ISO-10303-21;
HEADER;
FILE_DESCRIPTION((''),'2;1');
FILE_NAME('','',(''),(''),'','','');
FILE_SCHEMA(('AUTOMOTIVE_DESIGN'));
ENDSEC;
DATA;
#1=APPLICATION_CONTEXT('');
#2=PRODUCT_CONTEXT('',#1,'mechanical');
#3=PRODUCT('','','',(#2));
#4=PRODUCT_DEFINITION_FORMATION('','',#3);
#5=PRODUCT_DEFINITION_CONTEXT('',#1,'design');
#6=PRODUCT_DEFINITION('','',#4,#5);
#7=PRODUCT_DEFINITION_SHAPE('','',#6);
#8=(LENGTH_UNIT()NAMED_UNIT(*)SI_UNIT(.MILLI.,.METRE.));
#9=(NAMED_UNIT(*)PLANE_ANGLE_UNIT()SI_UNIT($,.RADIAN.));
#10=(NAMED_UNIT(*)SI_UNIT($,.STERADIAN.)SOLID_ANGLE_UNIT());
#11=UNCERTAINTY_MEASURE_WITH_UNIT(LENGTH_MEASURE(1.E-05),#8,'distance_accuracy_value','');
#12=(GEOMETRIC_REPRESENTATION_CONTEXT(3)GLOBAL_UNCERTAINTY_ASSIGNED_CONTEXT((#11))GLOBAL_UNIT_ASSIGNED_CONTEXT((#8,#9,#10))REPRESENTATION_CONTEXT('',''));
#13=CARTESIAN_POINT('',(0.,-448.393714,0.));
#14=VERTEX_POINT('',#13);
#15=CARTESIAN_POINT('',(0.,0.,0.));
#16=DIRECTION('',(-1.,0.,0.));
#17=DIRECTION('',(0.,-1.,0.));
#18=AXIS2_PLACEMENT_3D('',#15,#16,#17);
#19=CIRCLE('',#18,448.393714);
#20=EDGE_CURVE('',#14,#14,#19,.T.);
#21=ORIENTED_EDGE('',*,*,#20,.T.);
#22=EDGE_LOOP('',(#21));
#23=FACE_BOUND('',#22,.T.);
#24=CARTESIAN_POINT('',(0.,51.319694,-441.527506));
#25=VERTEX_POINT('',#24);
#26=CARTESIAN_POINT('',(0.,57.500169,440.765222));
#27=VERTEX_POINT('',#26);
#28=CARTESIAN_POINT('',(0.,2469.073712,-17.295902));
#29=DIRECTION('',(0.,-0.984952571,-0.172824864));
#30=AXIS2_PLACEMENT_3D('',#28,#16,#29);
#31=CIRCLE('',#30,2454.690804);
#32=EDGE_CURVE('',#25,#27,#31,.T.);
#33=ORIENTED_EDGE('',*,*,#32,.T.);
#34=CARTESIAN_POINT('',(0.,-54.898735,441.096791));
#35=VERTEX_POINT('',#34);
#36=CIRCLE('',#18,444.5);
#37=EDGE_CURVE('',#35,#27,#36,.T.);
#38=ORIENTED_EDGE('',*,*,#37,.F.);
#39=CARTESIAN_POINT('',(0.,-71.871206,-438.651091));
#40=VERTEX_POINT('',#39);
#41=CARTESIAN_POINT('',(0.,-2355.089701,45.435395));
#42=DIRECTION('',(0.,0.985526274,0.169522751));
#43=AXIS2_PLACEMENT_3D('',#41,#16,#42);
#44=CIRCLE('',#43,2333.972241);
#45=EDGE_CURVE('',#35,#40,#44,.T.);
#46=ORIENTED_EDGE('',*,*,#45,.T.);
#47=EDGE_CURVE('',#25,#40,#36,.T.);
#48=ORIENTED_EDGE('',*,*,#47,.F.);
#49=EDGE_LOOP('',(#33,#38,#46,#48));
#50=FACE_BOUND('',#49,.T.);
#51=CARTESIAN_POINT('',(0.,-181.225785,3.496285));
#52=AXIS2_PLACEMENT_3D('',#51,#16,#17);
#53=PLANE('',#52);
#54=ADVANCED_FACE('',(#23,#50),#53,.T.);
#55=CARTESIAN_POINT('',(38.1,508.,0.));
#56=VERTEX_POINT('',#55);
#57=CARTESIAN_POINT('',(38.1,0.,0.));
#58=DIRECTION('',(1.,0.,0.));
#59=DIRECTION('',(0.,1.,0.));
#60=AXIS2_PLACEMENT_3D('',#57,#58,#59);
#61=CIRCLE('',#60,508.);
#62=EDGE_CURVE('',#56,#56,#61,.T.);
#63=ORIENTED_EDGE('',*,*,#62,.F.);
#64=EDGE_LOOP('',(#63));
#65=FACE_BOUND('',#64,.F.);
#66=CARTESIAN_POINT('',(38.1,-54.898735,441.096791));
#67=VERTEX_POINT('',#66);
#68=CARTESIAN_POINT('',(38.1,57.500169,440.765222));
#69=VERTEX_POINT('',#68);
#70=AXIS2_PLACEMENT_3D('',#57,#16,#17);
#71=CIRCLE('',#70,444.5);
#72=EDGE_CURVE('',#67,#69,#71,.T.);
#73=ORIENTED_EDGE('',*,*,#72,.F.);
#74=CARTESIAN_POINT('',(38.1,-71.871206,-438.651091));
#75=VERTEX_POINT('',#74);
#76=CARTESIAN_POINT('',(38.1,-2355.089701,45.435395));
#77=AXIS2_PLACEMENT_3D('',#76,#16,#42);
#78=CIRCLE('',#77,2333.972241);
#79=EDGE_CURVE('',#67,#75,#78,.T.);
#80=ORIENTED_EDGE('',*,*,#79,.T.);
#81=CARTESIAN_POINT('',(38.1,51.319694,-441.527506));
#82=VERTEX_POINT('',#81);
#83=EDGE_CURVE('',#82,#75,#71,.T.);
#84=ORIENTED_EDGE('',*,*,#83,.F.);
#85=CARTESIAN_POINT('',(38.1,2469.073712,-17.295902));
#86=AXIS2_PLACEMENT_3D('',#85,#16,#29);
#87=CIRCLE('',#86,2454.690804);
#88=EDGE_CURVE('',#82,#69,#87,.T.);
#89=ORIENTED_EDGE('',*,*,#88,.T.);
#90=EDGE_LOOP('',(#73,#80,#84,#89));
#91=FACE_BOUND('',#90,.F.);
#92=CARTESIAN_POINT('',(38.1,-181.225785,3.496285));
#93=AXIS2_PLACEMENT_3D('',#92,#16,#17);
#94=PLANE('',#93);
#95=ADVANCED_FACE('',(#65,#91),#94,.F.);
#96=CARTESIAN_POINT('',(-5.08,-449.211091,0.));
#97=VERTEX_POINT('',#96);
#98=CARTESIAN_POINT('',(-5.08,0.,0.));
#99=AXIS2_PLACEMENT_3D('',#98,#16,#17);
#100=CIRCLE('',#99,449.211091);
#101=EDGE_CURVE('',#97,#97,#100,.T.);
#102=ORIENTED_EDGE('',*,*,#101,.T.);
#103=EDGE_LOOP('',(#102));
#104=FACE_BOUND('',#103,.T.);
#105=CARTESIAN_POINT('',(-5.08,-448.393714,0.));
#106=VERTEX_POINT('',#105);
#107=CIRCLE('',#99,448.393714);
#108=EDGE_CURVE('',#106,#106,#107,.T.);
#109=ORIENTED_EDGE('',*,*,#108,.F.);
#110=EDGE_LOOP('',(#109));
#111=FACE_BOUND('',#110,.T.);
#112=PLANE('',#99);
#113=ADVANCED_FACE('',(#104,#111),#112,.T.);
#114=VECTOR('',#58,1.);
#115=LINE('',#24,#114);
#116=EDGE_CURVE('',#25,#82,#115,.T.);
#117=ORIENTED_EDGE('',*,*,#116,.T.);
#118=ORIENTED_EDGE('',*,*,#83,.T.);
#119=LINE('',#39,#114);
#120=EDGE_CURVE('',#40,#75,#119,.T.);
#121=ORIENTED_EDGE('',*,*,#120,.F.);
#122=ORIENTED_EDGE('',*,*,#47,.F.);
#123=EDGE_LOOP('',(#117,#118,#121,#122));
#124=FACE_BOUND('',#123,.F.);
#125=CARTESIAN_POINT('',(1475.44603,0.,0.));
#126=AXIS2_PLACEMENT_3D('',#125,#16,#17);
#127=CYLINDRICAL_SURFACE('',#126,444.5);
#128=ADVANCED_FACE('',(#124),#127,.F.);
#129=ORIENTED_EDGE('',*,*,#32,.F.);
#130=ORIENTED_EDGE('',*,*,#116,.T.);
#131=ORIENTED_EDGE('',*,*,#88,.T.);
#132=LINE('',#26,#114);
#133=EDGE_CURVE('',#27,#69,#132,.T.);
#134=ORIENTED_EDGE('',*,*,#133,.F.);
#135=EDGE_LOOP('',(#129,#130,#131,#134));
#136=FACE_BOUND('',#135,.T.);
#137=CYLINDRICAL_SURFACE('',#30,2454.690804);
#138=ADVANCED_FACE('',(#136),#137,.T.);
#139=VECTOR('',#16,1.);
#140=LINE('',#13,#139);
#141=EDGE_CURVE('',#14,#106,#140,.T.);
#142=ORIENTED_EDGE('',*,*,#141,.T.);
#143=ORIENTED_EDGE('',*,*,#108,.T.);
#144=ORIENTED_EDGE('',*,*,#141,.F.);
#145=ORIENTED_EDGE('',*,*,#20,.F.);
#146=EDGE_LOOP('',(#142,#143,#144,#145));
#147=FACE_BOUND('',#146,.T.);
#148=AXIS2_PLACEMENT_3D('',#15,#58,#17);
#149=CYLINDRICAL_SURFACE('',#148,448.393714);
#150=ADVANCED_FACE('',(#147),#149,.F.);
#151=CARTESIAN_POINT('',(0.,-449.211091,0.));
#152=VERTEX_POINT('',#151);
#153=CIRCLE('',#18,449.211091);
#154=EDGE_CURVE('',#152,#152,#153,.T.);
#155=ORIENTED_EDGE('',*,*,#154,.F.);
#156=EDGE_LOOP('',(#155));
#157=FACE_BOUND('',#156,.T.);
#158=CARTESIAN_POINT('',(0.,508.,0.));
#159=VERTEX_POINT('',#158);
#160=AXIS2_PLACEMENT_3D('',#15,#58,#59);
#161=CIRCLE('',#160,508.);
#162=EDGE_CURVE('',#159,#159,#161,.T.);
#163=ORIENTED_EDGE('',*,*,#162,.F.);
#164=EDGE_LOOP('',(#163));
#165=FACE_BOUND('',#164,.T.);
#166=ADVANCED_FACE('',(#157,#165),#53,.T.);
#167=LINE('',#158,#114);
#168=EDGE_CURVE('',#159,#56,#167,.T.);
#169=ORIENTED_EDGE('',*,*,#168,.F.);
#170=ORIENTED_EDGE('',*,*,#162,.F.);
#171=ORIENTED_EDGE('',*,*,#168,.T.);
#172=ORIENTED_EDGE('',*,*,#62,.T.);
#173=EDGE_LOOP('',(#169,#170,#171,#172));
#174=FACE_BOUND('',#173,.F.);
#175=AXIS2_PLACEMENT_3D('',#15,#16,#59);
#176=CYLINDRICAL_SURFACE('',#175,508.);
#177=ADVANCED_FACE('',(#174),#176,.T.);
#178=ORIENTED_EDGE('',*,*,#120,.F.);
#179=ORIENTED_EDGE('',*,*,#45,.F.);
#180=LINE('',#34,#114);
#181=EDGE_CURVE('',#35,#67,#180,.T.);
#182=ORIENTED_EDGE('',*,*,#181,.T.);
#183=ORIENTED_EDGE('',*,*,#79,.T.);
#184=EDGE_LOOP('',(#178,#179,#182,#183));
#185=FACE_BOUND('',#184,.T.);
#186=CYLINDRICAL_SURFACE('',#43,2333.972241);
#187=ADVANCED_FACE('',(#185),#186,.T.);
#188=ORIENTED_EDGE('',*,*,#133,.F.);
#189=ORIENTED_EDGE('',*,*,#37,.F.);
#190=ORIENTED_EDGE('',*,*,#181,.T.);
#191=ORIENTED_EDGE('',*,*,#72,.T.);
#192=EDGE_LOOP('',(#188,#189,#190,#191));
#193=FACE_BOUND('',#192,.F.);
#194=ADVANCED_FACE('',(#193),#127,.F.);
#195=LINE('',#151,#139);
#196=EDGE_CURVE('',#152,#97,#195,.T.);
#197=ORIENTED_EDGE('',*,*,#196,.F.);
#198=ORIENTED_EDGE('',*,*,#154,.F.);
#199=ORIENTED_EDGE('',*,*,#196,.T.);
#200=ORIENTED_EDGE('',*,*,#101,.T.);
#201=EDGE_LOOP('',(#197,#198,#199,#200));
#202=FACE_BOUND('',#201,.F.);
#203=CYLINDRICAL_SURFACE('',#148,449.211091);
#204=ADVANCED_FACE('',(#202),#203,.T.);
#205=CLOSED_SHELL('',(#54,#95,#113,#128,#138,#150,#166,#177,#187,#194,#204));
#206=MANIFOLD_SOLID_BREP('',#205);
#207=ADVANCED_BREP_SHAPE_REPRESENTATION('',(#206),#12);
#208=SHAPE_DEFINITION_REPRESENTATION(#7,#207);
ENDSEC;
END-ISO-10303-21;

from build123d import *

# Parameters (mm, degrees)
F0_R     = 508
F1_DEPTH = 38.1
F4_D     = 889
F6_DEPTH = 38.1
F7_R     = 449.2110909422
F7_R_2   = 448.3937142921
F8_DEPTH = 5.08


with BuildPart() as f1:
    # F0 (on Right) → F1 (new body)
    with BuildSketch(Plane.YZ):
        Circle(F0_R)
    extrude(amount=F1_DEPTH)

    # F4 (through all)
    with Locations(Plane.YZ.offset(38.1)):
        with Locations((0, 0)):
            Hole(F4_D / 2)

    # F5 (on face) → F6 (join)
    with BuildSketch(Plane(origin=(0, 0, 0), x_dir=(0, -1, 0), z_dir=(-1, 0, 0))):
        with BuildLine():
            ThreePointArc((444.5, 0), (333.1536714942, 294.2598871235), (54.8987348933, 441.0967908601))
            ThreePointArc((54.8987348933, 441.0967908601), (21.5516885972, 0.4157843691), (71.8712062792, -438.6510910826))
            ThreePointArc((71.8712062792, -438.6510910826), (338.767620347, -287.7789940292), (444.5, 0))
        make_face()
        with BuildLine():
            ThreePointArc((-51.3196943653, -441.5275064707), (-14.4431317717, -0.1011743755), (-57.5001694311, 440.7652215357))
            ThreePointArc((-57.5001694311, 440.7652215357), (-444.4890945371, -3.1136534152), (-51.3196943653, -441.5275064707))
        make_face()
    extrude(amount=-F6_DEPTH)

    # F7 (on face) → F8 (join)
    with BuildSketch(Plane(origin=(0, 0, 0), x_dir=(0, -1, 0), z_dir=(-1, 0, 0))):
        Circle(F7_R)
        Circle(F7_R_2, mode=Mode.SUBTRACT)
    extrude(amount=F8_DEPTH)


solid = f1.part
